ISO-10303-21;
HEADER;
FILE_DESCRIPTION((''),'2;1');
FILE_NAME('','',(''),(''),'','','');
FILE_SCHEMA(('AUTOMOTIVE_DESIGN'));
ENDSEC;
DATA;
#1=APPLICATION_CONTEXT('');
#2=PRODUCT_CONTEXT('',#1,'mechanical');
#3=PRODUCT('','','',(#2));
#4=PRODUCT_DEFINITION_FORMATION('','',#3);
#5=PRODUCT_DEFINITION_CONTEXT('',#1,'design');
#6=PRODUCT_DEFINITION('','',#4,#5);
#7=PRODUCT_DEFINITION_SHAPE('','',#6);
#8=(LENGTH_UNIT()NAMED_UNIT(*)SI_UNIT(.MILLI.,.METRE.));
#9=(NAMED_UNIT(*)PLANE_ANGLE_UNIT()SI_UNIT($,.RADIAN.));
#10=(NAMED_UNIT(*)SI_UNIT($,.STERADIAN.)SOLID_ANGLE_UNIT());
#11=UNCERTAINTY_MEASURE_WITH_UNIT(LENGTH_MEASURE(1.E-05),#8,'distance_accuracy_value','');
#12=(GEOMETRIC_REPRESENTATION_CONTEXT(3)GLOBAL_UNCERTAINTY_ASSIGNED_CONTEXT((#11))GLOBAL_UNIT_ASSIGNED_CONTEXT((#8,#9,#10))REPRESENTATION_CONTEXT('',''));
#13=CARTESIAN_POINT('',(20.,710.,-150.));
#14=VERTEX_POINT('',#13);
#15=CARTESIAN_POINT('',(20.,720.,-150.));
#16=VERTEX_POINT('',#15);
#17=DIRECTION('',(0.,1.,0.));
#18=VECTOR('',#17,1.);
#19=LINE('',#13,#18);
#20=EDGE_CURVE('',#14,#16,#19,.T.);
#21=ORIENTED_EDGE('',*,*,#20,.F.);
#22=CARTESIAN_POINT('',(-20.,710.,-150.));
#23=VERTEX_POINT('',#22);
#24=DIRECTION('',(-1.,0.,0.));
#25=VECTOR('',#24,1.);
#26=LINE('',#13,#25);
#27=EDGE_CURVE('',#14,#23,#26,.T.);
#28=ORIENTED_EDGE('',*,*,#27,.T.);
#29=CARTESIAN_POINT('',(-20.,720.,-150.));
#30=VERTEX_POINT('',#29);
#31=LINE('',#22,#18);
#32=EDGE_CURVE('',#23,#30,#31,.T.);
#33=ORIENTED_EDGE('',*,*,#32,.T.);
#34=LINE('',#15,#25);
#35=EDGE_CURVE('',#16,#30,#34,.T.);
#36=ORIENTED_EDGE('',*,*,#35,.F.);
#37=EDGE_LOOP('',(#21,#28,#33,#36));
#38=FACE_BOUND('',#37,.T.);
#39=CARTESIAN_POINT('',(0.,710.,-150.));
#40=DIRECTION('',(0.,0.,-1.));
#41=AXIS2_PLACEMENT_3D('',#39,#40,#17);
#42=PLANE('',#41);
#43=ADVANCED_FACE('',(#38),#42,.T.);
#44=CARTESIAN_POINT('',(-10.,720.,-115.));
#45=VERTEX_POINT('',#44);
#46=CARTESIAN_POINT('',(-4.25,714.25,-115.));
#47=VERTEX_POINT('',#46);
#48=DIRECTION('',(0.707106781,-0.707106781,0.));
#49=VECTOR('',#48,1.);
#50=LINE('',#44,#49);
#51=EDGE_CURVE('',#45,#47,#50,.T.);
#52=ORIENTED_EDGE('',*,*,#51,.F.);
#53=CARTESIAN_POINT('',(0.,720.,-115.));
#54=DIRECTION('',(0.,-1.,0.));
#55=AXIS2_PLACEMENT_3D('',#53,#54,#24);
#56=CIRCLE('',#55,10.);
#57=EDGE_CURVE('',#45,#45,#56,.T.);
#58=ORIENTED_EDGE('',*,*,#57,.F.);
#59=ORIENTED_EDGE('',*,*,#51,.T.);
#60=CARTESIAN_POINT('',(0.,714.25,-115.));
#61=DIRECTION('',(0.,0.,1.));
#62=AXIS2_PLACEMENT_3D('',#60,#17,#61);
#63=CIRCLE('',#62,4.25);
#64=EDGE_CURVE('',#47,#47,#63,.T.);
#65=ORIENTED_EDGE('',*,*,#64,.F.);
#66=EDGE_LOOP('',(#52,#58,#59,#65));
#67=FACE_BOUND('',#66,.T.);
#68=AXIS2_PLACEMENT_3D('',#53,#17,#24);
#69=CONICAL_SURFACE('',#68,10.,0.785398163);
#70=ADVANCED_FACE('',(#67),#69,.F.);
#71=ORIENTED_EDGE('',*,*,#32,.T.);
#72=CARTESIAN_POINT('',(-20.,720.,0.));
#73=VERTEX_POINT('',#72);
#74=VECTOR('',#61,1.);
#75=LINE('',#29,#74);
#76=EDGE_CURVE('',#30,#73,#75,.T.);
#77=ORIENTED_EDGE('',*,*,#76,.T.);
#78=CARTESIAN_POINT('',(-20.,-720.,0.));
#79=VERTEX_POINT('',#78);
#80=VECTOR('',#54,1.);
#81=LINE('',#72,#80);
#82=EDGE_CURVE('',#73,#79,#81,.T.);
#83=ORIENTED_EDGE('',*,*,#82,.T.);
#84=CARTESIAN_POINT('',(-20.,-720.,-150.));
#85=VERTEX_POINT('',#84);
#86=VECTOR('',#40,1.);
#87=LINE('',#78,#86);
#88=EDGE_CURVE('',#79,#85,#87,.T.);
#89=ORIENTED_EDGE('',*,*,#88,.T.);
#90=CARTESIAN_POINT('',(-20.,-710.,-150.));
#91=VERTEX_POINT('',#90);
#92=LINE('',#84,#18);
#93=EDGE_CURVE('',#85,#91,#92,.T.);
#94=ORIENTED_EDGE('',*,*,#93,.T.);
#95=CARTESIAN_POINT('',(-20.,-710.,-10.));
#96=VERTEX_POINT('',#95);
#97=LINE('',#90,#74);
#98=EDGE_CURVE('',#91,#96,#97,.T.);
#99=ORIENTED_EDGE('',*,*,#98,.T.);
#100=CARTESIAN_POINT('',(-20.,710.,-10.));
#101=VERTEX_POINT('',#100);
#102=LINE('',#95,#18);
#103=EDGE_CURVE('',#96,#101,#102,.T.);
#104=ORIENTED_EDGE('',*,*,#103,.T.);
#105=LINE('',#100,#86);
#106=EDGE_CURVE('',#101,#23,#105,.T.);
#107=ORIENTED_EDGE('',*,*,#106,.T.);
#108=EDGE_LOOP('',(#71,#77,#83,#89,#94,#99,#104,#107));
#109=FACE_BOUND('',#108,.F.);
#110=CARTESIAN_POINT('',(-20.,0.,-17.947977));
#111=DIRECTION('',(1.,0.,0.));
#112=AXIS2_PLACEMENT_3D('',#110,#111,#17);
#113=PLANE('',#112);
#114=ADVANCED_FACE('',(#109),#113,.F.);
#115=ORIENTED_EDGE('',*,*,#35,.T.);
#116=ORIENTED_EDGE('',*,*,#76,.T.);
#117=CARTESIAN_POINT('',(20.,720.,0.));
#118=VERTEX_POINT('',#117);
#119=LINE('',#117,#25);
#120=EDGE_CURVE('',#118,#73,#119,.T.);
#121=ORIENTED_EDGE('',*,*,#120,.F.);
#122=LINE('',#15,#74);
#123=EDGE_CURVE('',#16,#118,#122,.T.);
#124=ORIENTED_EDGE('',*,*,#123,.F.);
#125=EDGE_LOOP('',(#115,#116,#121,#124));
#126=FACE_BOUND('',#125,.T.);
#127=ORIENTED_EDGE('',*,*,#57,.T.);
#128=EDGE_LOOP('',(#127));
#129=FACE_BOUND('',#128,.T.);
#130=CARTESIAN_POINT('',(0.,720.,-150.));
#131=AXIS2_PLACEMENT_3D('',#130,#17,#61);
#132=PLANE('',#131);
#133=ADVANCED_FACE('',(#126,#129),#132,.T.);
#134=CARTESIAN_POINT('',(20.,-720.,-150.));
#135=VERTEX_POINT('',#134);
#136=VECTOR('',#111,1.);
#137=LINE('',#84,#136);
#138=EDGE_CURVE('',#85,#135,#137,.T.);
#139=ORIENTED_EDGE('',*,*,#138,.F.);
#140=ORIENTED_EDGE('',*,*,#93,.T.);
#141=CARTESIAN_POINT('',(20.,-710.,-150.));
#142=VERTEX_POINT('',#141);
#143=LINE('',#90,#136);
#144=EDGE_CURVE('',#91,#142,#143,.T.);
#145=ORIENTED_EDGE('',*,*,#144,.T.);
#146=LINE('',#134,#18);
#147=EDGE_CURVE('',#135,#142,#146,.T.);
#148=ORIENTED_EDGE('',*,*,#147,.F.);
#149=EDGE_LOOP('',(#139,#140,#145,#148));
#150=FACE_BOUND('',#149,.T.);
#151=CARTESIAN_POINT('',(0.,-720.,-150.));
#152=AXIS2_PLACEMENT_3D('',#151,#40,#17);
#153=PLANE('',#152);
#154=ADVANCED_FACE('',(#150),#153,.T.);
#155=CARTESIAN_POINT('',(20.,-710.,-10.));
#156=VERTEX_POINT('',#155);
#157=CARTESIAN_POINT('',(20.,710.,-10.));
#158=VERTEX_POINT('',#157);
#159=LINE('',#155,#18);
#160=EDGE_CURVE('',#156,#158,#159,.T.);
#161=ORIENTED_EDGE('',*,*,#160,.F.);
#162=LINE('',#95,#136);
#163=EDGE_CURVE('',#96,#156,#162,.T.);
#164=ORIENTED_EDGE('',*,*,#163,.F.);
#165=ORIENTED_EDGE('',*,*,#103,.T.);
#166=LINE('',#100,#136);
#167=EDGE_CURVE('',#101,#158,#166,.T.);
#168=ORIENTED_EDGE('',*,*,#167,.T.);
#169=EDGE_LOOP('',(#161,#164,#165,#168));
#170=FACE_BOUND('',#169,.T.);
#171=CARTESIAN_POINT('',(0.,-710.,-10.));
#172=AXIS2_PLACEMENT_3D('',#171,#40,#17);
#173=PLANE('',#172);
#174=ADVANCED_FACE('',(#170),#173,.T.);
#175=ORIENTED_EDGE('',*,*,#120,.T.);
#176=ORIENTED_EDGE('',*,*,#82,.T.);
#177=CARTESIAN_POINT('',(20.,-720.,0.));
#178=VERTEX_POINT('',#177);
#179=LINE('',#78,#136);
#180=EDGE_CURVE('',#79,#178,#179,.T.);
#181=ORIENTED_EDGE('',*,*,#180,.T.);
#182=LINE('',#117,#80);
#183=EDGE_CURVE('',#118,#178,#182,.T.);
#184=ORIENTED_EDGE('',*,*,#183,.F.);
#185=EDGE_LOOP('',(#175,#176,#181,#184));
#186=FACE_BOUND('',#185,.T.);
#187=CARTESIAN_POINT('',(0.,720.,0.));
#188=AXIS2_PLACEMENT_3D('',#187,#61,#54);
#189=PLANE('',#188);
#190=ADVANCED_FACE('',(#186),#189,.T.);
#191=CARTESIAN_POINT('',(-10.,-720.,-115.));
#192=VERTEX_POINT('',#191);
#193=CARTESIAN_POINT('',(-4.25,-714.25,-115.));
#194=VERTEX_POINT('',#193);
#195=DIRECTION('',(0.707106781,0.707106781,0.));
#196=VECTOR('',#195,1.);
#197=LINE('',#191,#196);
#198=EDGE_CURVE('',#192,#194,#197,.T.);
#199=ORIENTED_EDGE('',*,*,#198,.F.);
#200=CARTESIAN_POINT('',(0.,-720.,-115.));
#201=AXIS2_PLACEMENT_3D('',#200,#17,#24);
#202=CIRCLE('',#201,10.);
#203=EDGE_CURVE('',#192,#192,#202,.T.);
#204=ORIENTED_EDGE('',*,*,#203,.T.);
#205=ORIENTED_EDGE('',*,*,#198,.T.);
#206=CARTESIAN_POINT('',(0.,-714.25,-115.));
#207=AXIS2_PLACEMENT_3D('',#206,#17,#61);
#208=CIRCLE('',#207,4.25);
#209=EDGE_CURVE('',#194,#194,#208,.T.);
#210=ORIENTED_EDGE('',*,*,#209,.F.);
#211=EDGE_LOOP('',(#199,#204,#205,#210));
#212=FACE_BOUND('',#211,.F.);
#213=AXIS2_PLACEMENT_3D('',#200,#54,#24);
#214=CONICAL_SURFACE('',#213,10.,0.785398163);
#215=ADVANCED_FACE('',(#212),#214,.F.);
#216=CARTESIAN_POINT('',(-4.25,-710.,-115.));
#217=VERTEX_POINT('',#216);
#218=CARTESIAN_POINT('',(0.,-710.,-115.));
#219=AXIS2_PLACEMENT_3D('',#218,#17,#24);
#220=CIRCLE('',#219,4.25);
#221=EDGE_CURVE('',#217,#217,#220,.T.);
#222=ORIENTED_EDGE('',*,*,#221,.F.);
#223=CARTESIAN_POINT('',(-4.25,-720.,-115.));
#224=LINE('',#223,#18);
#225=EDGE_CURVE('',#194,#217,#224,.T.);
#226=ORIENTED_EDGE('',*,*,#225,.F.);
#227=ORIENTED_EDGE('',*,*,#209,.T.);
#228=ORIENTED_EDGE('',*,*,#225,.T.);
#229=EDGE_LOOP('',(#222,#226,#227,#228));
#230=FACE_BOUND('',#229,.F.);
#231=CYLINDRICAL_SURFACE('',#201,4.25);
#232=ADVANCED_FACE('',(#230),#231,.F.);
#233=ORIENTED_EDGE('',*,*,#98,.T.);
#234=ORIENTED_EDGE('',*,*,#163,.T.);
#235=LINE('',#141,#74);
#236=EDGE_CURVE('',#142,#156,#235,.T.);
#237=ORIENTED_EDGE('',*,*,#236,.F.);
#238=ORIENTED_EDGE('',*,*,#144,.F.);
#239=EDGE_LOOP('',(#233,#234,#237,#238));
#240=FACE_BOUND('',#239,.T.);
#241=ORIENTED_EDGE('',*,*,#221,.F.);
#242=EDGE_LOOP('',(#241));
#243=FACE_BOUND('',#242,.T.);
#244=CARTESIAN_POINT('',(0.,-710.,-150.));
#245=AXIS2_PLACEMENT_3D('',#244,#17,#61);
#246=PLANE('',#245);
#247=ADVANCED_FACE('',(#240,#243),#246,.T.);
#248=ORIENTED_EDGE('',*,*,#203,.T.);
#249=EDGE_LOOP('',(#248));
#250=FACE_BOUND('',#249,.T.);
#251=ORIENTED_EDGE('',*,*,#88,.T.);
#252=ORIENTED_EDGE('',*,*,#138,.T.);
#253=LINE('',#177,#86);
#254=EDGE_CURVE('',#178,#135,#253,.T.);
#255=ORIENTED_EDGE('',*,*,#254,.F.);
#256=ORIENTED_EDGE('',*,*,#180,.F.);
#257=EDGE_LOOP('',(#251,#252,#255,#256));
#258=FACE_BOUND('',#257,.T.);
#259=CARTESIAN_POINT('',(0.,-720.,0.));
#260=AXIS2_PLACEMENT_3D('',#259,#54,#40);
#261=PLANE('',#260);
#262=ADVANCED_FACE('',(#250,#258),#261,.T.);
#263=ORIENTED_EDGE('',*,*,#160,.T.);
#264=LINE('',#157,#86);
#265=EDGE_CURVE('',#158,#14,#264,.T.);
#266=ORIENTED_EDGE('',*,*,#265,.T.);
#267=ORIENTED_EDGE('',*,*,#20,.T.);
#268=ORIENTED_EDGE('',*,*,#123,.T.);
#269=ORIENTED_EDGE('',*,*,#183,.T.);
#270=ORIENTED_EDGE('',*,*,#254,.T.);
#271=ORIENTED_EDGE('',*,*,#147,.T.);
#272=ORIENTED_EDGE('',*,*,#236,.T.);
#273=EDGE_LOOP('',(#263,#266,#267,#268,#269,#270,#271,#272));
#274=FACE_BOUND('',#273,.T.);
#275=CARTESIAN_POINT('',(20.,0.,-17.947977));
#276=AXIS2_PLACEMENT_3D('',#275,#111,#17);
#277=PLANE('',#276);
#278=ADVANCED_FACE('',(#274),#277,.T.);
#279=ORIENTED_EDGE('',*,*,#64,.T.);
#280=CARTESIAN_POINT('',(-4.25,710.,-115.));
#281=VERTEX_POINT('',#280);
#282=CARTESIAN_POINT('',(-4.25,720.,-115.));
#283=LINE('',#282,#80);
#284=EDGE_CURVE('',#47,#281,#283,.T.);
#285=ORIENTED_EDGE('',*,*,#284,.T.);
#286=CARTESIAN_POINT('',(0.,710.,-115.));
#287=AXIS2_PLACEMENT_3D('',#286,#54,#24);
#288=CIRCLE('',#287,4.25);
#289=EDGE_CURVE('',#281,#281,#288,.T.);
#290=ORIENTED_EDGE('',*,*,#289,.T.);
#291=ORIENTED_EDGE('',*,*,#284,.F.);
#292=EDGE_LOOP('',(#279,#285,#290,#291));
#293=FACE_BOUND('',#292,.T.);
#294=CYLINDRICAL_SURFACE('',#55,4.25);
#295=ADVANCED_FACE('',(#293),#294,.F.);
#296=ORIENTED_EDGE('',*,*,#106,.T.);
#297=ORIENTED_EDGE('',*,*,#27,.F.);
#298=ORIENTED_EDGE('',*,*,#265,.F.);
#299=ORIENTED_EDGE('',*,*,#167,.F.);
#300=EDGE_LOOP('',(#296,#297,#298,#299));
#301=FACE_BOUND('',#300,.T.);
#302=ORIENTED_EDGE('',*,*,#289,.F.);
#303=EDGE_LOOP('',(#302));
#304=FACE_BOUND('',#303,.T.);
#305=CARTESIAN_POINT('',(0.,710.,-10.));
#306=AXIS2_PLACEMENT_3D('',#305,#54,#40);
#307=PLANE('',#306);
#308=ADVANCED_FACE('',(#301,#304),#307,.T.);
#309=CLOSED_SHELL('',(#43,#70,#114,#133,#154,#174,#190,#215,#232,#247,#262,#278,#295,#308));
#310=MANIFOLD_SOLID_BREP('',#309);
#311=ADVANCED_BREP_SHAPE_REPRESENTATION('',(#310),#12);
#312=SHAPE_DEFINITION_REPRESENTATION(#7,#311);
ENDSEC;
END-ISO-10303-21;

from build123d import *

# Parameters (mm, degrees)
F1_DEPTH       = 20
F3_D           = 8.5
F3_DEPTH       = 15
F3_CSINK_D     = 20
F3_CSINK_ANGLE = 90
F3_TIP         = 2.5536576309


# Not quite as in the source:
# - a pattern or mirror of a feature is missing from the dataset's text; its kind, count and spacing are read off the source's solid


with BuildPart() as f1:
    # F0 (on Right) → F1 (new body, symmetric)
    with BuildSketch(Plane.YZ):
        Polygon((720, 0), (0, 0), (-720, 0), (-720, -150), (-710, -150), (-710, -10), (0, -10), (710, -10), (710, -150), (720, -150), align=None)
    extrude(amount=F1_DEPTH, both=True)

    # F3
    with Locations(Plane.XZ.offset(720)):
        with Locations((0, -115)):
            f3 = CounterSinkHole(F3_D / 2, F3_CSINK_D / 2, depth=F3_DEPTH, counter_sink_angle=F3_CSINK_ANGLE)
            with Locations((0, 0, -(F3_DEPTH + F3_TIP / 2))):  # 118° drill point
                Cone(0, F3_D / 2, F3_TIP, mode=Mode.SUBTRACT)

    # F3_copies: F3 across plane
    add(f3.mirror(Plane.ZX), mode=Mode.SUBTRACT)


solid = f1.part
